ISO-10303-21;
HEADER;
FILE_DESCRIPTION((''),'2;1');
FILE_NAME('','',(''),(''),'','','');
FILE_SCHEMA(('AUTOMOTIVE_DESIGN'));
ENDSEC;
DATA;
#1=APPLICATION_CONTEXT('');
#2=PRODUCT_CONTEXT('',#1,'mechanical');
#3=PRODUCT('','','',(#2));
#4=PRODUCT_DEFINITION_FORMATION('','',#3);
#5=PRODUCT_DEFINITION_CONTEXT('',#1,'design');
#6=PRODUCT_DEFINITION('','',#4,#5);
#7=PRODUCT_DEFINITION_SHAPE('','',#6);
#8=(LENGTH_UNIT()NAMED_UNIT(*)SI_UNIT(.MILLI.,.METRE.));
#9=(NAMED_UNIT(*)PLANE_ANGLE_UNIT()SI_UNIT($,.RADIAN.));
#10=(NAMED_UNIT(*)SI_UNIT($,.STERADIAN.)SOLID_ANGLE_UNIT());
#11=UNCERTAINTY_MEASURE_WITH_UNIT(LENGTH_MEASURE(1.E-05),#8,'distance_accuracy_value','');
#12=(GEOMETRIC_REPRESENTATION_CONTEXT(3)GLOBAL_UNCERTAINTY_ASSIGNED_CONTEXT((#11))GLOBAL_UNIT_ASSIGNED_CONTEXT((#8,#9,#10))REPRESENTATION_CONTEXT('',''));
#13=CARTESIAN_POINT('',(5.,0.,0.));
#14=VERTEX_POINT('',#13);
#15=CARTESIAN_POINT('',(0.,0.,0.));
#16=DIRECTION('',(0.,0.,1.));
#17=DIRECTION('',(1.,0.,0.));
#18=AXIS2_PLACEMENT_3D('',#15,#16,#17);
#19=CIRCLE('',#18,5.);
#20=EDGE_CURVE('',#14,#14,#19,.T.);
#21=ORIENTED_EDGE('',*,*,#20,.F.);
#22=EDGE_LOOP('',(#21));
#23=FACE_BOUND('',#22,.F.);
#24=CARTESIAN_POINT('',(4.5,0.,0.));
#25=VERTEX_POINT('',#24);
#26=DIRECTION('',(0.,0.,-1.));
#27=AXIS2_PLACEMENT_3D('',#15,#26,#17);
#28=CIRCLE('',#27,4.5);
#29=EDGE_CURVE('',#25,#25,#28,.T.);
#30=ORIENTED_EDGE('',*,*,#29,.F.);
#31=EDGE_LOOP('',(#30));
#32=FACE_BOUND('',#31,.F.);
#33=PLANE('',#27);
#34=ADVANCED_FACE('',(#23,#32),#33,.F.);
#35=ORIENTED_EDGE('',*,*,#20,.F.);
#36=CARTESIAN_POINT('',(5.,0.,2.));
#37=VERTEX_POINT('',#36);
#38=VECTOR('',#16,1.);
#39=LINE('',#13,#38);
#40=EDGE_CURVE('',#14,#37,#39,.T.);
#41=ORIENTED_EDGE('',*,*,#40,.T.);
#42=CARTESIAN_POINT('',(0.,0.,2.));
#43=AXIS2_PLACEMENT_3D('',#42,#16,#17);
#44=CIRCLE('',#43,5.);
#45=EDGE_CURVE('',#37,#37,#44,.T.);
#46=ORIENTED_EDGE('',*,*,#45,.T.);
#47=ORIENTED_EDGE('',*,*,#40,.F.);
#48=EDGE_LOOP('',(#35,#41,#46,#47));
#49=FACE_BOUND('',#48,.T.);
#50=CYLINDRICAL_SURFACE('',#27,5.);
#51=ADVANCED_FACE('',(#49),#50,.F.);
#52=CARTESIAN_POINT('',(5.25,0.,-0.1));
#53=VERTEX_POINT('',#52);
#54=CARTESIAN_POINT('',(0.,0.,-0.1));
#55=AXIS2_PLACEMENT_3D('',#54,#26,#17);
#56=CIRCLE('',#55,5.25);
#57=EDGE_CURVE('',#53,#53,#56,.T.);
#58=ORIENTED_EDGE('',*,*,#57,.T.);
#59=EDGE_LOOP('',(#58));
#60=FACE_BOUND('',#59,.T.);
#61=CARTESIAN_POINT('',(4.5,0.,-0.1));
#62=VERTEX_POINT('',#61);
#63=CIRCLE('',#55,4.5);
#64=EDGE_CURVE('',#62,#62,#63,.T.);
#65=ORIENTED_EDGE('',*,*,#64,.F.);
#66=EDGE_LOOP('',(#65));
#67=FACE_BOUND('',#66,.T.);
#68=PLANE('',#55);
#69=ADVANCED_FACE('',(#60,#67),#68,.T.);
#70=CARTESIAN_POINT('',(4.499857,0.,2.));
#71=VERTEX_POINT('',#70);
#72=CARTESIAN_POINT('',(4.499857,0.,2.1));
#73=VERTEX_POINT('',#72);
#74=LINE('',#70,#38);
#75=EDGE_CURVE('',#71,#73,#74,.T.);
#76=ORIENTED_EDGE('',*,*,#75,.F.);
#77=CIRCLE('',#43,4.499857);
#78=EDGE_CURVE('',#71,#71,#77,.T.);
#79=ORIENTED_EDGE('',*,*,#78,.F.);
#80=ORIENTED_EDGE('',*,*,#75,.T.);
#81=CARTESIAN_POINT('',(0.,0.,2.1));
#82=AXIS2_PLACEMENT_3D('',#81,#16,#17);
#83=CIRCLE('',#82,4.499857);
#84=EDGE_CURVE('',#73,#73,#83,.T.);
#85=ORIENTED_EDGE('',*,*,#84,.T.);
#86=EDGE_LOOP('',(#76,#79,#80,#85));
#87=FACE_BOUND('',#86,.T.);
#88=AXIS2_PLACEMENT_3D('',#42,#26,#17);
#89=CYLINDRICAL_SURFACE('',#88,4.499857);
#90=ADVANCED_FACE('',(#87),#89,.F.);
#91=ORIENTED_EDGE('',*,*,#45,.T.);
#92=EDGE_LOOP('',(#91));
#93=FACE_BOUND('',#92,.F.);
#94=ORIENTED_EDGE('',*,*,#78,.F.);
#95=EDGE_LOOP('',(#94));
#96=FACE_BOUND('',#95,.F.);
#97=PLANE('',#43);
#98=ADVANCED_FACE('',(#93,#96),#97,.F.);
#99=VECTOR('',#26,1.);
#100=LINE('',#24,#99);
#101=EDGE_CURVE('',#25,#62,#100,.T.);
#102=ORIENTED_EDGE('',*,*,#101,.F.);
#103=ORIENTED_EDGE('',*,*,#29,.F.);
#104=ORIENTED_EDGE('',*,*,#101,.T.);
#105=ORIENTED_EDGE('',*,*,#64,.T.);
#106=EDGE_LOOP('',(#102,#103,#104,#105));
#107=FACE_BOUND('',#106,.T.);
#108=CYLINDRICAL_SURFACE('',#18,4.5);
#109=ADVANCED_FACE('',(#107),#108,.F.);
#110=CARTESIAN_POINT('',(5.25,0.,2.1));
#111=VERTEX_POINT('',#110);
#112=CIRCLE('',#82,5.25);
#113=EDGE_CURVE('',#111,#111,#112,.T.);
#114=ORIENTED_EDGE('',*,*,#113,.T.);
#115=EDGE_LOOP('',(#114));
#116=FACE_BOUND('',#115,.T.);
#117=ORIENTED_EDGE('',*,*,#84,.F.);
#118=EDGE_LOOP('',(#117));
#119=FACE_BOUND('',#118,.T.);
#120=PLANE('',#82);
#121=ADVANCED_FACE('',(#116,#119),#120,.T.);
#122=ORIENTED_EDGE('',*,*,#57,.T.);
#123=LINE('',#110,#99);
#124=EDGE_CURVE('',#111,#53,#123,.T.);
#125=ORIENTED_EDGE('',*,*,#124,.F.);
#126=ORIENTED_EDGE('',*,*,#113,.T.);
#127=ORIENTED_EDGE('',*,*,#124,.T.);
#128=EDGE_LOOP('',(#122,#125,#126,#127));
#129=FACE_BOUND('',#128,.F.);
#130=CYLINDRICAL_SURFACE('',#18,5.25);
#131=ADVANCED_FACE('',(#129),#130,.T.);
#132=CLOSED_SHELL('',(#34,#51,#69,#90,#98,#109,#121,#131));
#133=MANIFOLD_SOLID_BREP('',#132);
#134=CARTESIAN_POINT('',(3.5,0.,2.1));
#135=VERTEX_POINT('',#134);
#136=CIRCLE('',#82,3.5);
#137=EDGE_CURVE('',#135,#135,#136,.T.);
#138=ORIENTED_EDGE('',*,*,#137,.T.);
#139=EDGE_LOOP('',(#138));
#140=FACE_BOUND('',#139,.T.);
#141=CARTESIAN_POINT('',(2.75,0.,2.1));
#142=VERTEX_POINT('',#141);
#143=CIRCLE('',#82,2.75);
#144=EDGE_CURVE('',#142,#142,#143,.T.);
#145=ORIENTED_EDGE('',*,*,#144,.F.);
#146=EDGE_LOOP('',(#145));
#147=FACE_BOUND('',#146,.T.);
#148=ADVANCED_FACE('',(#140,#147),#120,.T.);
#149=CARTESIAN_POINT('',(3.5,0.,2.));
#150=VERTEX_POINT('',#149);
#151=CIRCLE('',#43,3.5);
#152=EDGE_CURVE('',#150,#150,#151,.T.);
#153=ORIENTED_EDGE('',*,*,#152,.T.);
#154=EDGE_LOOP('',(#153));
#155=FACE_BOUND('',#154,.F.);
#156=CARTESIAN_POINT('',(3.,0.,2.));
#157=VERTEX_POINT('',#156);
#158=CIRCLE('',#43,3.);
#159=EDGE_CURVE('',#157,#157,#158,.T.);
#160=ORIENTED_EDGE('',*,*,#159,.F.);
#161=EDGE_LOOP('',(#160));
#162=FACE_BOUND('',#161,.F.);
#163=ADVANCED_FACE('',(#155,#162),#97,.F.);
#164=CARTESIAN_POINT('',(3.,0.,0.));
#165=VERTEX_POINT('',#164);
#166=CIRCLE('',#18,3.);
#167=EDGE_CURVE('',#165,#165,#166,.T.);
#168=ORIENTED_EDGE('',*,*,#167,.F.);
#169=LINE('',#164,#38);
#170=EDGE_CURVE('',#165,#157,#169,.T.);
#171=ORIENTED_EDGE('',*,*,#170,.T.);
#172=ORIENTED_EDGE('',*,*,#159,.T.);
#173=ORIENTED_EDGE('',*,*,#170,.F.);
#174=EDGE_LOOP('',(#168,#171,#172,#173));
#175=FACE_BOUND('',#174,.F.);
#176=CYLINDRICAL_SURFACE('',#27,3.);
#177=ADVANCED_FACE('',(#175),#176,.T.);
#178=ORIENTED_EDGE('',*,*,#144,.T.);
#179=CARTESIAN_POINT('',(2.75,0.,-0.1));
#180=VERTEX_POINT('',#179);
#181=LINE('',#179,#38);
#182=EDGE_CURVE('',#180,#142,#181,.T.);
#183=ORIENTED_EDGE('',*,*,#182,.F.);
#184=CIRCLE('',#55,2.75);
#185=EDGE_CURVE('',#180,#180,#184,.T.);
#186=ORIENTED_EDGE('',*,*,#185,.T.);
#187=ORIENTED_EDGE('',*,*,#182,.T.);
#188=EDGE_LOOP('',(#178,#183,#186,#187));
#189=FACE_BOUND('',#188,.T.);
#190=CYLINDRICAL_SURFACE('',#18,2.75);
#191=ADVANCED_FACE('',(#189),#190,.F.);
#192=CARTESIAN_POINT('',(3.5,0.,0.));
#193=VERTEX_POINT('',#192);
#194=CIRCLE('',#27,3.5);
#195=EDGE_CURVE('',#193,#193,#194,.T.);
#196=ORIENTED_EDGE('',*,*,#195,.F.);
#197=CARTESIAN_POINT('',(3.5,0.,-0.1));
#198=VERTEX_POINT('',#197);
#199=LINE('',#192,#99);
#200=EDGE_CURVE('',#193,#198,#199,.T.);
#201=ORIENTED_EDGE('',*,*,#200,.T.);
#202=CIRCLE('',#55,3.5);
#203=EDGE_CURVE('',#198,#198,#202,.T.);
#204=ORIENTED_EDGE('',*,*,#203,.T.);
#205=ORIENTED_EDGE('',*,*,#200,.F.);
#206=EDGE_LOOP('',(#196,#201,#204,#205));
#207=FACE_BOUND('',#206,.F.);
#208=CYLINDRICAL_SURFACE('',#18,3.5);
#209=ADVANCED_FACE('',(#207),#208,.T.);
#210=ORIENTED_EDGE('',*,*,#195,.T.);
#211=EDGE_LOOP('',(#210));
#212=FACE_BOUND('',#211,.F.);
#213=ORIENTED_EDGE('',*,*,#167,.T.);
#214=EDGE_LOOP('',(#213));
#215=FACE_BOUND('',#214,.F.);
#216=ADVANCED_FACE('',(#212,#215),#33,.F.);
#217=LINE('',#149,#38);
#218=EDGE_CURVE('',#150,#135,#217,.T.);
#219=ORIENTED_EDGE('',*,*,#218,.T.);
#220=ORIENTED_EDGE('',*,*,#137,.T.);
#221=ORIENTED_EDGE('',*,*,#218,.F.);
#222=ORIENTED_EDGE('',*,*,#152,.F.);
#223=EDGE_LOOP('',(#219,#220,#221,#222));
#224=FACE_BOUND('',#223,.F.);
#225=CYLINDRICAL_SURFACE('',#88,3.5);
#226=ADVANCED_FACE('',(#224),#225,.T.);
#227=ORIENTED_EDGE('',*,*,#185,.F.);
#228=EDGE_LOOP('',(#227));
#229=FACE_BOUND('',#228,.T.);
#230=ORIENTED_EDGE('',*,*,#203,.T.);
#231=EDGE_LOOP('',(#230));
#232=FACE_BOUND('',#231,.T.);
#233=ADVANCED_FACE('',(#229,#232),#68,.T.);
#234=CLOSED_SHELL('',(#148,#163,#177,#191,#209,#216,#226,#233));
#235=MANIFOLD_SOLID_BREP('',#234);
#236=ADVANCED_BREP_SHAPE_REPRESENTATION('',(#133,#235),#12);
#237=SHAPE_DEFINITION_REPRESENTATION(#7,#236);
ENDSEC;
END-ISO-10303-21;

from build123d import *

# Parameters (mm, degrees)
F0_R      = 5.25
F0_R_2    = 5
F1_DEPTH  = 2
F0_R_3    = 3
F0_R_4    = 2.75
F7_R      = 5.25
F7_R_2    = 5
F7_R_3    = 4.4998566685
F8_DEPTH  = 0.1
F7_R_4    = 3.5
F7_R_5    = 3
F7_R_6    = 2.75
F9_R      = 3.5
F9_R_2    = 3
F9_R_3    = 2.75
F10_DEPTH = 0.1
F9_R_4    = 5.25
F9_R_5    = 4.5


# Not quite as in the source:
# - a feature of the source that left no trace in its solid (it failed there, or was rolled back) is left out
# - the program builds the solid bodies; features that only make, move or delete a surface that nothing else refers to are left out


with BuildPart() as f1:
    # F0 (on Top) → F1 (new body)
    with BuildSketch(Plane.XY):
        Circle(F0_R)
        Circle(F0_R_2, mode=Mode.SUBTRACT)
    extrude(amount=F1_DEPTH)

    # F7 (on face) → F8 (join)
    with BuildSketch(Plane.XY.offset(2)):
        Circle(F7_R)
        Circle(F7_R_2, mode=Mode.SUBTRACT)
        Circle(F7_R_2)
        Circle(F7_R_3, mode=Mode.SUBTRACT)
    extrude(amount=F8_DEPTH)

    # F9 (on face) → F10, piece 2 (join)
    with BuildSketch(Plane(origin=(0, 0, 0), x_dir=(1, 0, 0), z_dir=(0, 0, -1))):
        Circle(F9_R_4)
        Circle(F9_R_5, mode=Mode.SUBTRACT)
    extrude(amount=F10_DEPTH)


with BuildPart() as f1b:
    # F0 (on Top) → F1, piece 2 (new body)
    with BuildSketch(Plane.XY):
        Circle(F0_R_3)
        Circle(F0_R_4, mode=Mode.SUBTRACT)
    extrude(amount=F1_DEPTH)

    # F7 (on face) → F8, piece 2 (join)
    with BuildSketch(Plane.XY.offset(2)):
        Circle(F7_R_4)
        Circle(F7_R_5, mode=Mode.SUBTRACT)
        Circle(F7_R_5)
        Circle(F7_R_6, mode=Mode.SUBTRACT)
    extrude(amount=F8_DEPTH)

    # F9 (on face) → F10 (join)
    with BuildSketch(Plane(origin=(0, 0, 0), x_dir=(1, 0, 0), z_dir=(0, 0, -1))):
        Circle(F9_R)
        Circle(F9_R_2, mode=Mode.SUBTRACT)
        Circle(F9_R_2)
        Circle(F9_R_3, mode=Mode.SUBTRACT)
    extrude(amount=F10_DEPTH)


solid = Compound([f1.part, f1b.part])
